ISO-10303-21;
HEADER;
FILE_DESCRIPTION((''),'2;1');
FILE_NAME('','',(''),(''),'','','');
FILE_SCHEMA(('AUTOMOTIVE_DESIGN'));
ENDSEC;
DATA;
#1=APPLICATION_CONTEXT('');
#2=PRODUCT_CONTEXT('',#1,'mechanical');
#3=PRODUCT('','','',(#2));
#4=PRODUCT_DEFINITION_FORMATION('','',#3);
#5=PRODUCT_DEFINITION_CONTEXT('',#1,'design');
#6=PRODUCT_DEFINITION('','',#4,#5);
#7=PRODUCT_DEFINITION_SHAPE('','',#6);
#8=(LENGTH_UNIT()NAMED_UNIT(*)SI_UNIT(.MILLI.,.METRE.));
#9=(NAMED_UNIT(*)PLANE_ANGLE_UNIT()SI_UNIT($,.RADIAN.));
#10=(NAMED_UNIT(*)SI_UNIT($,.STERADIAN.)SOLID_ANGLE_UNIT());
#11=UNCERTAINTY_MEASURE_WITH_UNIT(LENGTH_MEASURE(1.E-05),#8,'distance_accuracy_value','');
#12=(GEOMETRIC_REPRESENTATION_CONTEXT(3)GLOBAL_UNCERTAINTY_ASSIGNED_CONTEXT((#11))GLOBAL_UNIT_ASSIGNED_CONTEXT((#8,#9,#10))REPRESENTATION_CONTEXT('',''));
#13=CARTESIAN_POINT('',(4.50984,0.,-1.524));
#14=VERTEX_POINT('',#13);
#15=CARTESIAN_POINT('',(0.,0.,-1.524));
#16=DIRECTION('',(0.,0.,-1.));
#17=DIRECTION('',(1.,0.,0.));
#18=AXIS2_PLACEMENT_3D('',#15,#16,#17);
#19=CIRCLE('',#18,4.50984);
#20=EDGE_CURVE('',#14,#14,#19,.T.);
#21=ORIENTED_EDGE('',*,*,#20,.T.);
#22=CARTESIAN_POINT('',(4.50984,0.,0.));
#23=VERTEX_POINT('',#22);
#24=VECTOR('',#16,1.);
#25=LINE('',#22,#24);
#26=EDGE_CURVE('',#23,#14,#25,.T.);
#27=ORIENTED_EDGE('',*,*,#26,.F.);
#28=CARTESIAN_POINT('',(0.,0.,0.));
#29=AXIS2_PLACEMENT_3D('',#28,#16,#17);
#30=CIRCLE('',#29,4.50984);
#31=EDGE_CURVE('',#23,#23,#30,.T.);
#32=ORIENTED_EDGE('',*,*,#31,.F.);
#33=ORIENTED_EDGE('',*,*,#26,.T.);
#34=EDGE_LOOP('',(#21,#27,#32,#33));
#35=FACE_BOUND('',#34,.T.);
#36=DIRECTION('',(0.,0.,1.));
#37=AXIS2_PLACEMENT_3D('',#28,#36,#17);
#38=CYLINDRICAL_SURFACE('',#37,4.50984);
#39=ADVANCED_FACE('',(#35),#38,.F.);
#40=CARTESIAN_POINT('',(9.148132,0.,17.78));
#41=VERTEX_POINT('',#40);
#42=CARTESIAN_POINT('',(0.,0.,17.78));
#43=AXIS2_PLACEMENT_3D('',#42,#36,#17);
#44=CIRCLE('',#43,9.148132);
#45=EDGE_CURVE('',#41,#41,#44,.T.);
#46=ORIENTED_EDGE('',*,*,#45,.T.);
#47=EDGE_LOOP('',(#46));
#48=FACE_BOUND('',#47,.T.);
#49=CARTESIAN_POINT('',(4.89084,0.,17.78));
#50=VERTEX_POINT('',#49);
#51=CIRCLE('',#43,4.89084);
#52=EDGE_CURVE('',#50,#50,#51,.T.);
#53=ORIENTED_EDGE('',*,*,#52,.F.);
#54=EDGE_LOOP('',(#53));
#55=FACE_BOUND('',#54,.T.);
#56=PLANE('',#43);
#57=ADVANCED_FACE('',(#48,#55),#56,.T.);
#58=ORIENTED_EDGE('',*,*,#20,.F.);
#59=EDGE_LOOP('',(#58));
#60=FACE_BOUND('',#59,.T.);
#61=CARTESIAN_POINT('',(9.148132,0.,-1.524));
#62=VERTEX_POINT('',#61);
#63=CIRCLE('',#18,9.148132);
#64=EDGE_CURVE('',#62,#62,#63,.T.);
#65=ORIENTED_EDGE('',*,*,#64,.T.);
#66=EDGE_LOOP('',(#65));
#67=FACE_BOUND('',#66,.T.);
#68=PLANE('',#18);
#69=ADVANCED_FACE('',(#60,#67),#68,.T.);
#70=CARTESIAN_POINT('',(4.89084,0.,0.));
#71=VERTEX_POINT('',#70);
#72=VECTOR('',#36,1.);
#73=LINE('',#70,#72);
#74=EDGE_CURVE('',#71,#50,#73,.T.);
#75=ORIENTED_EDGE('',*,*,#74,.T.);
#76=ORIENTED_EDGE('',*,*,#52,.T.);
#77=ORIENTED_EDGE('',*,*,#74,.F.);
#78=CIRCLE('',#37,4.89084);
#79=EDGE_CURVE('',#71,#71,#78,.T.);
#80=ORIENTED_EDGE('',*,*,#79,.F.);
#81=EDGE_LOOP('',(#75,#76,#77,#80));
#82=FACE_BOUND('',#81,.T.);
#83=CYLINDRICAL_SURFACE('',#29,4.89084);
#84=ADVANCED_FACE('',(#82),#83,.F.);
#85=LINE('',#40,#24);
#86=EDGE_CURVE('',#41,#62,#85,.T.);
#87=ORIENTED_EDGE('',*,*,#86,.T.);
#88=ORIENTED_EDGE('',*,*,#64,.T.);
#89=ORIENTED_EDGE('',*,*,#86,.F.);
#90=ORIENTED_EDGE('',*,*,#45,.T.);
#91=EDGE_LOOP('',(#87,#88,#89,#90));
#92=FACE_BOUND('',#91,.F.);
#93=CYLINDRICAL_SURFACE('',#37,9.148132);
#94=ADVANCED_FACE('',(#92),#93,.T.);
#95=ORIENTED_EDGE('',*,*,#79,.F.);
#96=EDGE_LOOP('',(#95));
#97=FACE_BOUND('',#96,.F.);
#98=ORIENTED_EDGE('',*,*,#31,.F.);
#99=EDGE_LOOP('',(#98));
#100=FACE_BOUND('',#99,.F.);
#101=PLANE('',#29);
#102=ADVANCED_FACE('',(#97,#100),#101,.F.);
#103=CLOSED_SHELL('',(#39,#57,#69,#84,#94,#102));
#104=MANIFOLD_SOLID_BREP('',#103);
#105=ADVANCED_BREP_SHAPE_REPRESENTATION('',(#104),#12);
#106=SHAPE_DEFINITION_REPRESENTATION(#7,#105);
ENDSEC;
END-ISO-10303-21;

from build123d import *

# Parameters (mm, degrees)
F0_R     = 9.1481324812
F0_R_2   = 4.8908401844
F2_DEPTH = 17.78
F3_R     = 9.1481324812
F3_R_2   = 4.5098401844
F4_DEPTH = 1.524


# Not quite as in the source:
# - the program builds the solid bodies; features that only make, move or delete a surface that nothing else refers to are left out


with BuildPart() as f2:
    # F0 (on Top) → F2 (new body)
    with BuildSketch(Plane.XY):
        Circle(F0_R)
        Circle(F0_R_2, mode=Mode.SUBTRACT)
    extrude(amount=F2_DEPTH)

    # F3 (on face) → F4 (join)
    with BuildSketch(Plane(origin=(0, 0, 0), x_dir=(1, 0, 0), z_dir=(0, 0, -1))):
        Circle(F3_R)
        Circle(F3_R_2, mode=Mode.SUBTRACT)
    extrude(amount=F4_DEPTH)


solid = f2.part
